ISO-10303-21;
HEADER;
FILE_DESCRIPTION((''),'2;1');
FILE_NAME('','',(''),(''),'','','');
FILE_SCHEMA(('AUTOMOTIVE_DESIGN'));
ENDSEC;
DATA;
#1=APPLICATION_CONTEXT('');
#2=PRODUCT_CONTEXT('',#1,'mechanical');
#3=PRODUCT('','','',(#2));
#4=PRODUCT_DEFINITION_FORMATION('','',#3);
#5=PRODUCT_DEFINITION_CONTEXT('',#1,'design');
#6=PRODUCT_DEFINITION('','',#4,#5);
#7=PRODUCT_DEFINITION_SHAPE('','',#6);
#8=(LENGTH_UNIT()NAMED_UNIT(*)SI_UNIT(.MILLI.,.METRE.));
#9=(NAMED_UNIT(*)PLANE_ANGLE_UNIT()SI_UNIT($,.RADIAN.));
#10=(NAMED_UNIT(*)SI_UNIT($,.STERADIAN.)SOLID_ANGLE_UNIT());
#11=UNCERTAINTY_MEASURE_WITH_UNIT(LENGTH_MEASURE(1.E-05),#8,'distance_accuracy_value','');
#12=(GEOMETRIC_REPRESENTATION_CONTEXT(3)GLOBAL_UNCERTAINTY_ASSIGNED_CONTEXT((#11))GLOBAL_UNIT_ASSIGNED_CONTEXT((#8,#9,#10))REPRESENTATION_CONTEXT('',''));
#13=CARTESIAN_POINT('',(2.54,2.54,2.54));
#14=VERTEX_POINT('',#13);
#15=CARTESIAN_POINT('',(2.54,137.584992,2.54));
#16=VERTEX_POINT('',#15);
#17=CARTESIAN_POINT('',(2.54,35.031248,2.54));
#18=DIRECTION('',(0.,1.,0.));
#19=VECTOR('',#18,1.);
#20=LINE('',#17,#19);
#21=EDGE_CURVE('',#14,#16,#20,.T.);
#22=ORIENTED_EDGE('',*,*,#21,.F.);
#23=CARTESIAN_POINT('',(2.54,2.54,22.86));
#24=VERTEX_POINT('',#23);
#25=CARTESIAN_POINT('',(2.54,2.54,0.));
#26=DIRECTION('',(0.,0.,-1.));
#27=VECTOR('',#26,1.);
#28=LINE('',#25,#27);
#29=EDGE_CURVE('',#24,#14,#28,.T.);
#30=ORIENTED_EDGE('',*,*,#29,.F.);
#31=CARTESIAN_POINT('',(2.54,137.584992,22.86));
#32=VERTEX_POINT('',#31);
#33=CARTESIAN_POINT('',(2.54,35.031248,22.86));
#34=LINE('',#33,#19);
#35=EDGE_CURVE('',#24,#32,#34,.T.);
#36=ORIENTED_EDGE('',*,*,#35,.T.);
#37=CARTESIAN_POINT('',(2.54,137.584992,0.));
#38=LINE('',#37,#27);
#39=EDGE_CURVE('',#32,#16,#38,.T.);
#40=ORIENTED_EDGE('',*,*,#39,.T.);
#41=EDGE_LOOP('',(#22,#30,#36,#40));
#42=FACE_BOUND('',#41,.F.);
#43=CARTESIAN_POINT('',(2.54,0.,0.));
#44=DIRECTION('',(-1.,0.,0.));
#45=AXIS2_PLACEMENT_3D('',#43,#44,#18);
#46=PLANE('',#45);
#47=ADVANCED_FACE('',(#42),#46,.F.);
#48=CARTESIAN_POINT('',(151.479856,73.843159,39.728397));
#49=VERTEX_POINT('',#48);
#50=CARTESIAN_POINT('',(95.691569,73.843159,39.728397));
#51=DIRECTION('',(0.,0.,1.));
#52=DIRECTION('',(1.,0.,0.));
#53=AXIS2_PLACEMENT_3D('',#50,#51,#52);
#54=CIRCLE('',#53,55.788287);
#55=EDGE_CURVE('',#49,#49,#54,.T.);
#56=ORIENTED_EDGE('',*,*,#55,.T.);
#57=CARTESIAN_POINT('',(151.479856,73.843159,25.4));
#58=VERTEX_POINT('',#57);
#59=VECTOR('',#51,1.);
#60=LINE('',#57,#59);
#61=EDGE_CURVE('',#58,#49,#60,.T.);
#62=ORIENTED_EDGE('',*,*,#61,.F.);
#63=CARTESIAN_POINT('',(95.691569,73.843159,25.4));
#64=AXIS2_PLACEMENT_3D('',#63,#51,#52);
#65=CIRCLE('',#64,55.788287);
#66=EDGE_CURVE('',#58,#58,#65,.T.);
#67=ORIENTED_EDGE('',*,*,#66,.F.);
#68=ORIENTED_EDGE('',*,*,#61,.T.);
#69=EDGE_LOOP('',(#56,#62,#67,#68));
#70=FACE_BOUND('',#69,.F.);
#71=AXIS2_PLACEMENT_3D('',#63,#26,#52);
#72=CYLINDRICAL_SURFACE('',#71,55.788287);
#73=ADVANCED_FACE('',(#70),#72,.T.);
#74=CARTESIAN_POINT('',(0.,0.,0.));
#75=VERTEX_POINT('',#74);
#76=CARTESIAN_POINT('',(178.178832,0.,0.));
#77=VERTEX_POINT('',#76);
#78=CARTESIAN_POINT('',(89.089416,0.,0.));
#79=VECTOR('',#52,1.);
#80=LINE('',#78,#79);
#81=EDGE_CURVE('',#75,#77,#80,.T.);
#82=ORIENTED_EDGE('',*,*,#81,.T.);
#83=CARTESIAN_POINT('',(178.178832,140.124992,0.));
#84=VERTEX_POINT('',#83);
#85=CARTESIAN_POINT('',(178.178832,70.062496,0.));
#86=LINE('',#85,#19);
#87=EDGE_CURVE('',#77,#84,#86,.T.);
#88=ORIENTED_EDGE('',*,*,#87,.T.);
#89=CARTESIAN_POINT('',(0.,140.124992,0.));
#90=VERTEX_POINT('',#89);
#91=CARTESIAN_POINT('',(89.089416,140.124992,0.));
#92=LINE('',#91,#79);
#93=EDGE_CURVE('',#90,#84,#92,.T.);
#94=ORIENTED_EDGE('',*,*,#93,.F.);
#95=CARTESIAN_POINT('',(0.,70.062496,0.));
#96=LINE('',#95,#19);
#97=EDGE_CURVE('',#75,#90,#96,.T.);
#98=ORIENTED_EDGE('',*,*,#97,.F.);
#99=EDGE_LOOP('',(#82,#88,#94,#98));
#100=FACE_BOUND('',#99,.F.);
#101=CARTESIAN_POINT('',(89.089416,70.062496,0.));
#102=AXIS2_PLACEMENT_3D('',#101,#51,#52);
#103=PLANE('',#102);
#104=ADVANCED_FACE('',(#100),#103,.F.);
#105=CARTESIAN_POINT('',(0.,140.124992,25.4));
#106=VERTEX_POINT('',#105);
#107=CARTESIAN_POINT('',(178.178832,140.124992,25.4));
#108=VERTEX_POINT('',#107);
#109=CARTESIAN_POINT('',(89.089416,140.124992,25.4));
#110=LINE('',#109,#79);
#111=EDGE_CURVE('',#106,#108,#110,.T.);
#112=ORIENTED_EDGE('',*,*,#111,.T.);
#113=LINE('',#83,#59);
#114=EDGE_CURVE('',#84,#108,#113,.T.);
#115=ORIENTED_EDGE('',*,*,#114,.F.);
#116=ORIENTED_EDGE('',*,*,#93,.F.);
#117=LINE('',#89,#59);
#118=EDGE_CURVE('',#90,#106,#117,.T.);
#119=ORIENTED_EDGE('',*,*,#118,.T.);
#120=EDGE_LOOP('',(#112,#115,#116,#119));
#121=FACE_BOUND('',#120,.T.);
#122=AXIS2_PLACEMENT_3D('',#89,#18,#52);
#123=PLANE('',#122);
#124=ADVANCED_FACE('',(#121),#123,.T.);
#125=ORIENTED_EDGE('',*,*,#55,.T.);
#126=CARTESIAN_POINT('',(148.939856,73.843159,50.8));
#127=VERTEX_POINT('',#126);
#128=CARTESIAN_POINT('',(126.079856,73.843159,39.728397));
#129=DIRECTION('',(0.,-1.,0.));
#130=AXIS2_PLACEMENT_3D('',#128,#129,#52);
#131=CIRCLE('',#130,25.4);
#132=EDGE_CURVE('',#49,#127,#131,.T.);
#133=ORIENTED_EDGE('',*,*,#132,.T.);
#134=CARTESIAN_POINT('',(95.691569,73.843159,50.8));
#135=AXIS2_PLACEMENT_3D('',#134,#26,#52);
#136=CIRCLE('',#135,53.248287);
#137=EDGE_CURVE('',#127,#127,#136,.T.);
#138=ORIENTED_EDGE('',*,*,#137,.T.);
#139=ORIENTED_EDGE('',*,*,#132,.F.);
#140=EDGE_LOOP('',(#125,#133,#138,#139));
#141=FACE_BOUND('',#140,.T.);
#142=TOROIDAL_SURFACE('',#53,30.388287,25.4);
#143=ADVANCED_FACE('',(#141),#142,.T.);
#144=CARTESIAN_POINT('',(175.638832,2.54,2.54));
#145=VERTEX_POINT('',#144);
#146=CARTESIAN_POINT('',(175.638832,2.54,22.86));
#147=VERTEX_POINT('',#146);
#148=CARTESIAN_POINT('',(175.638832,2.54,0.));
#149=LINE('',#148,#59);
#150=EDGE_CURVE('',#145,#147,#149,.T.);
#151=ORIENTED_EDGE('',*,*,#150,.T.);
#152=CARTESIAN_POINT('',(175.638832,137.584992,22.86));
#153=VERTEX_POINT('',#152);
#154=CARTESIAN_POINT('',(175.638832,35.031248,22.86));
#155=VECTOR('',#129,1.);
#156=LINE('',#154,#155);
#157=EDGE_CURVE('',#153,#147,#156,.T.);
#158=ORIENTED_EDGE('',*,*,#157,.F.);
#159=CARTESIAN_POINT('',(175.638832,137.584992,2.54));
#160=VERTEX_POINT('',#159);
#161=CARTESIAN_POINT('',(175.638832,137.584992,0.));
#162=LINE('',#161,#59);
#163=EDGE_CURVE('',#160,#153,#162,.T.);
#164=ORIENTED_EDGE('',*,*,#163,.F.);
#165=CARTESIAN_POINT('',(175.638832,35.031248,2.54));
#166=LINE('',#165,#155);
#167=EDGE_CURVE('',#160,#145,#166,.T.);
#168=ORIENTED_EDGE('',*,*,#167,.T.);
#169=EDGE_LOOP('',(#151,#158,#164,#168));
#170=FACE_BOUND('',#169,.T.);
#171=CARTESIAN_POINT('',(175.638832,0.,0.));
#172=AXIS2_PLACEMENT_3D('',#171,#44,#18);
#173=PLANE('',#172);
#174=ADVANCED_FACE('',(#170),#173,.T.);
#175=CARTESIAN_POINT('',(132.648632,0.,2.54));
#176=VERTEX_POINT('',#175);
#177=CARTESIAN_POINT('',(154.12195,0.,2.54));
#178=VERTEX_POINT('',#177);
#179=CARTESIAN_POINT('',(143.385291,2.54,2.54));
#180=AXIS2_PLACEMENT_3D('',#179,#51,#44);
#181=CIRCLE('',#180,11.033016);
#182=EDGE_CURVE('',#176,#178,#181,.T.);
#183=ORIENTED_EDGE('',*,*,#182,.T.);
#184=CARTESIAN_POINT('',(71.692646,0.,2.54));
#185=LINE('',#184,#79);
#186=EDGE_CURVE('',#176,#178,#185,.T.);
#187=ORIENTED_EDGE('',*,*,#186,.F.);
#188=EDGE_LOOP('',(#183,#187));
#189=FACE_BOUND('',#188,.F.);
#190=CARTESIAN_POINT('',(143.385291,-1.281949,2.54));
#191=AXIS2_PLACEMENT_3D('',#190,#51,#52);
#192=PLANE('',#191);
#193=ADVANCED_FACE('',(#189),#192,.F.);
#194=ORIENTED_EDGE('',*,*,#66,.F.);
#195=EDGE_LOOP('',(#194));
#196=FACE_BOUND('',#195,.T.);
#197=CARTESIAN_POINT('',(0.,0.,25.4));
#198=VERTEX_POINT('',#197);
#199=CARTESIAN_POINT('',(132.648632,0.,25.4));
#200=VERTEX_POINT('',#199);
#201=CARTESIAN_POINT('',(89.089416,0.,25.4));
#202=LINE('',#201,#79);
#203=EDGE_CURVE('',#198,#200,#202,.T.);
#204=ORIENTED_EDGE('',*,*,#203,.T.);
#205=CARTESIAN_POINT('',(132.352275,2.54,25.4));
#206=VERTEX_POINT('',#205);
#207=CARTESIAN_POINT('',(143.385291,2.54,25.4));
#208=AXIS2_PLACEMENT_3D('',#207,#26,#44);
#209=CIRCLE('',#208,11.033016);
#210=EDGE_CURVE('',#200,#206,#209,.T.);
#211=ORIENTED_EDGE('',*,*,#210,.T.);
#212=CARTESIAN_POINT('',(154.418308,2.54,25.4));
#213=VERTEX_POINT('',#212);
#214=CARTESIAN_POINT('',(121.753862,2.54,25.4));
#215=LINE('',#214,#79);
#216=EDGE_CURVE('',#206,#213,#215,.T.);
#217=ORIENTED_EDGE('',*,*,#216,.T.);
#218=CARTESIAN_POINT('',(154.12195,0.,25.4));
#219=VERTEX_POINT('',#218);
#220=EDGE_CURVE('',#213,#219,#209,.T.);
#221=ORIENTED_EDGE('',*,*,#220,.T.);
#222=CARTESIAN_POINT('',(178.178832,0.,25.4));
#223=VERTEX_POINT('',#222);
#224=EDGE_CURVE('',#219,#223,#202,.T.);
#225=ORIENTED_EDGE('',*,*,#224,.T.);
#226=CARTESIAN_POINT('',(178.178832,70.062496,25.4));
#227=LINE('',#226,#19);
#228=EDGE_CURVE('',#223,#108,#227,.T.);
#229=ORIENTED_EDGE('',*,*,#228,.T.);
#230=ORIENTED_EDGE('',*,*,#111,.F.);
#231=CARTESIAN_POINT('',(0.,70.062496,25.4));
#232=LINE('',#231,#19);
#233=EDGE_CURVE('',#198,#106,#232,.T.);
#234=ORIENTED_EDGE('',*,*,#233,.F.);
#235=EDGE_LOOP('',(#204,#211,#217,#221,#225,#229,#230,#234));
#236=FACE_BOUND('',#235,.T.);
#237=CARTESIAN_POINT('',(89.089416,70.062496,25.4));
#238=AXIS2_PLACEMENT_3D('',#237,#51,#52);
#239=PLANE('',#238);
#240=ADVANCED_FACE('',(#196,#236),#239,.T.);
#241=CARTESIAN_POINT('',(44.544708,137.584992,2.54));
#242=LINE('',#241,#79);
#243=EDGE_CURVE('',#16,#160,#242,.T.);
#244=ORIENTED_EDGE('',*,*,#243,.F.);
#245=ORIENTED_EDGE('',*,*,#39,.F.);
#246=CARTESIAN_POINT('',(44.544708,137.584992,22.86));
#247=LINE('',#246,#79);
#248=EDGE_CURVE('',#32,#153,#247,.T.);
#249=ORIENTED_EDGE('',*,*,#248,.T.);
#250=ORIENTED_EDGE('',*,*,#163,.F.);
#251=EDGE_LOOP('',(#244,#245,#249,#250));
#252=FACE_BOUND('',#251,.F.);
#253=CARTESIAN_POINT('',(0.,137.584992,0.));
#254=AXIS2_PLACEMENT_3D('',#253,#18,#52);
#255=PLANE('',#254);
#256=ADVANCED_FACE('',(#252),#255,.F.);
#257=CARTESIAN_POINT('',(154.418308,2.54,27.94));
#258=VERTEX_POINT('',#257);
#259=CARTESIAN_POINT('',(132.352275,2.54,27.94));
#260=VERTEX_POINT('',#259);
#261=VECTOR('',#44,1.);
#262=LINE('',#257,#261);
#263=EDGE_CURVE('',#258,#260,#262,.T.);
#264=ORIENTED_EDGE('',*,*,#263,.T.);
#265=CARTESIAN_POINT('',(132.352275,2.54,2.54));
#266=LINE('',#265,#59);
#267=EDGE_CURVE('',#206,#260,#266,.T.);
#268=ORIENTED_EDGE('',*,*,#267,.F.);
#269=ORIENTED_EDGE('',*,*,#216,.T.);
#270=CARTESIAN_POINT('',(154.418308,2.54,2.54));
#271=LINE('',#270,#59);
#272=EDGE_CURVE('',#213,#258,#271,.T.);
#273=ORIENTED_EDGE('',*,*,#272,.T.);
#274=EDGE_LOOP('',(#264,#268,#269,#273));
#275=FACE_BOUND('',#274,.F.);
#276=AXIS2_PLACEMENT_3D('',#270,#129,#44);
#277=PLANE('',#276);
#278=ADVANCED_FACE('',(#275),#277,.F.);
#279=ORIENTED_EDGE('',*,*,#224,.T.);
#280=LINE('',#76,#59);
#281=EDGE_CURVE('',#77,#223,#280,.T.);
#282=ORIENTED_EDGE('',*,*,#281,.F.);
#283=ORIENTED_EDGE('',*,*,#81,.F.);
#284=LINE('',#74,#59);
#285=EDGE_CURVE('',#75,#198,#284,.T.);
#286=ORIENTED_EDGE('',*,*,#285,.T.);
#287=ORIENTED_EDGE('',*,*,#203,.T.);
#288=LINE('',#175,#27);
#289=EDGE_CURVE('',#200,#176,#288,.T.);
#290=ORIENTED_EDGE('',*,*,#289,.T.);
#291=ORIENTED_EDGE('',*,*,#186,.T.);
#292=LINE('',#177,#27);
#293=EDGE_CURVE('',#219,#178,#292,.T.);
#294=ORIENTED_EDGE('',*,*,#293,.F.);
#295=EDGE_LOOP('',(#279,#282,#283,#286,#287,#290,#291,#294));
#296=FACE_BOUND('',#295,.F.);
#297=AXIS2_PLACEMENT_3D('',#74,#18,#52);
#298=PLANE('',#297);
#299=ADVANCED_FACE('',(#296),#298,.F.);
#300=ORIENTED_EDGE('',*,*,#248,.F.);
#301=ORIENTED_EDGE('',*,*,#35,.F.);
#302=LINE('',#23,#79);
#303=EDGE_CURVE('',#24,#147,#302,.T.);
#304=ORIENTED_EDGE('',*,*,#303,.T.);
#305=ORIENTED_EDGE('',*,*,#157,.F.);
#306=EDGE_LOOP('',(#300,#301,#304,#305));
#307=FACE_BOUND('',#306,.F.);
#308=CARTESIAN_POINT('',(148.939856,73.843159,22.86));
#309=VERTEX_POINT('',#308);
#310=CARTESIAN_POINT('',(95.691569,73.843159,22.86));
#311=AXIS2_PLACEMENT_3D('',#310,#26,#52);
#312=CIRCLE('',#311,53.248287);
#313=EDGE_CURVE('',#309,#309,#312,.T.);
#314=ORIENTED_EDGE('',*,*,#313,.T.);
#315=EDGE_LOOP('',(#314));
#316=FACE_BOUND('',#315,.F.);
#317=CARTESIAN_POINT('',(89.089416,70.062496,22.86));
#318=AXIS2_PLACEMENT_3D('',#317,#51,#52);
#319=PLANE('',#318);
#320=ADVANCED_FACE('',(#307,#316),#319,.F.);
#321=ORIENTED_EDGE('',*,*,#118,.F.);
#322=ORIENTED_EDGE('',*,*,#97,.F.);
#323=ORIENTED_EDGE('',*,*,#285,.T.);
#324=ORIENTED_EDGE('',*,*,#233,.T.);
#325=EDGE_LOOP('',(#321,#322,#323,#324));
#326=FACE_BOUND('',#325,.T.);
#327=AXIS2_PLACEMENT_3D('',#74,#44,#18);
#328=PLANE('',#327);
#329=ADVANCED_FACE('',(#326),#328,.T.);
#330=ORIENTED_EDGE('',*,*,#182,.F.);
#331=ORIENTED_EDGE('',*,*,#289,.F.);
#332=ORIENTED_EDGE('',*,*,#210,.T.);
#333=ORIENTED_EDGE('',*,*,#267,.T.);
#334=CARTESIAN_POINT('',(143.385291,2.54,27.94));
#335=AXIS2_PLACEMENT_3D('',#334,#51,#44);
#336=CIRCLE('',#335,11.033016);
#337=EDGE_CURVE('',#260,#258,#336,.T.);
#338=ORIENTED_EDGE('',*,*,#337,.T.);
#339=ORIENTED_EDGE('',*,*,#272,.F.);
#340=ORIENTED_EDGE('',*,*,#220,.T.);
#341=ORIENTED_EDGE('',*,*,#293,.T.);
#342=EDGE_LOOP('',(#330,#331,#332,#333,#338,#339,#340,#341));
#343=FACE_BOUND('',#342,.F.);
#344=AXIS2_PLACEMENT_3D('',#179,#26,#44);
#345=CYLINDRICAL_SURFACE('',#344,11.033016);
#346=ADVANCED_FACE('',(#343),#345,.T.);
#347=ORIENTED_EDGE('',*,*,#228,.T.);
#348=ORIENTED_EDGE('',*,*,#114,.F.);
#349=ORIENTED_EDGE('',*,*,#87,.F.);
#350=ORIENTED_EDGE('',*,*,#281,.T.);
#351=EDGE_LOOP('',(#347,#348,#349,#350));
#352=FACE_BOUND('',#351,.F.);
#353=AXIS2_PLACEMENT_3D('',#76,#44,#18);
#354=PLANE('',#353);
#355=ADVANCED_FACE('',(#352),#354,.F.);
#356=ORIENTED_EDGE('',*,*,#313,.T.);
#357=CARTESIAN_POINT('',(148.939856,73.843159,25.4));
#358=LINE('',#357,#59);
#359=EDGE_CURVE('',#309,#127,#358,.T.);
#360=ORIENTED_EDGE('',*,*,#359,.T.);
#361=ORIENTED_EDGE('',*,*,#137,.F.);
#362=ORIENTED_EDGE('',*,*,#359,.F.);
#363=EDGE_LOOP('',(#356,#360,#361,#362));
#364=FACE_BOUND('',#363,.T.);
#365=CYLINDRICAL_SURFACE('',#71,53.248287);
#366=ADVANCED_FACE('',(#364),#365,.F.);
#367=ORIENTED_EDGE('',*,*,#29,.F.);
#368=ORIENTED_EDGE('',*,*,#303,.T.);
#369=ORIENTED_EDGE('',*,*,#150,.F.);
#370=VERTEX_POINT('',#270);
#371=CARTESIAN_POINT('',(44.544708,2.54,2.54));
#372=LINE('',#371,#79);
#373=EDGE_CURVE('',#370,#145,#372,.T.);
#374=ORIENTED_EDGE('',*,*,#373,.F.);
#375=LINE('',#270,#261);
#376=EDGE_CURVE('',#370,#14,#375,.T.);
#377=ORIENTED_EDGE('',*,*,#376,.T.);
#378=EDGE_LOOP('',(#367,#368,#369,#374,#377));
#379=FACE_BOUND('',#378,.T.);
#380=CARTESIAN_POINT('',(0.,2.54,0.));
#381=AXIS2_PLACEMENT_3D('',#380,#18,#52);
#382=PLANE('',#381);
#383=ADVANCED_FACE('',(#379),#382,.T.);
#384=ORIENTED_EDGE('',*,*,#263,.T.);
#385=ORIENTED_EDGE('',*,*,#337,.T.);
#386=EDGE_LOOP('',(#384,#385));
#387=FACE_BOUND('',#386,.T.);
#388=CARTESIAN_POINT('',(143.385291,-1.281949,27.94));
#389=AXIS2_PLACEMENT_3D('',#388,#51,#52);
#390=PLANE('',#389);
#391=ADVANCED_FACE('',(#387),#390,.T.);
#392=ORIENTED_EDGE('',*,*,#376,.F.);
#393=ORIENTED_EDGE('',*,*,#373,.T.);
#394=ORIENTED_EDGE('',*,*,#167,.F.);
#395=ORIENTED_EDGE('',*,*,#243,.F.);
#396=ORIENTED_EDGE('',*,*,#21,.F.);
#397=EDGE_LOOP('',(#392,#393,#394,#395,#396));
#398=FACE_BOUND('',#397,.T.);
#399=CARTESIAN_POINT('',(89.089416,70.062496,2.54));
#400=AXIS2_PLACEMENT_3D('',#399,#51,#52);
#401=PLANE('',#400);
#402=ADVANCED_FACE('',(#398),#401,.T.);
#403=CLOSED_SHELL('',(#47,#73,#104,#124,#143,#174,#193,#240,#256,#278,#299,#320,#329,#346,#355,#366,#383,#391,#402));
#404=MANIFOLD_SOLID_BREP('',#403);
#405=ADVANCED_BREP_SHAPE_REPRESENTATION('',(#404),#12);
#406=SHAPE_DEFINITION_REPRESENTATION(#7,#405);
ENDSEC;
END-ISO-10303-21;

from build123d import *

# Parameters (mm, degrees)
F0_W     = 178.1788319349
F0_H     = 140.1249915361
F1_DEPTH = 25.4
F2_R     = 55.7882871659
F3_DEPTH = 25.4
F4_T     = -2.54
F7_DEPTH = 25.4


# Not quite as in the source:
# - a fillet or chamfer that OpenCascade refuses, or shapes differently, is made with other operations: its cross-section is extruded or revolved along the edge and cut away or added


with BuildPart() as f1:
    # F0 (on Top) → F1 (new body)
    with BuildSketch(Plane.XY):
        with Locations((89.0894159675, 70.0624957681)):
            Rectangle(F0_W, F0_H)
    extrude(amount=F1_DEPTH)

    # F2 (on face) → F3 (join)
    with BuildSketch(Plane.XY.offset(25.4)):
        with Locations((95.6915691495, 73.8431587815)):
            Circle(F2_R)
    extrude(amount=F3_DEPTH)

    # F4
    f4_openings = [f1.faces().sort_by_distance(p)[0] for p in [
        (95.691569, 73.843159, 50.8),
    ]]
    offset(amount=F4_T, openings=f4_openings, kind=Kind.INTERSECTION)

    # F5: fillet of radius 25.4 on 1 edges, made by hand

    # F5_s1 → F5_t2 (revolve, cut)
    with BuildSketch(Plane.XZ.offset(-73.8431587815)):
        with BuildLine():
            ThreePointArc((151.4798563154, 39.7283966834), (150.8367139512, 45.4080093463), (148.9398563154, 50.8))
            Line((148.9398563154, 50.8), (151.4798563154, 50.8))
            Line((151.4798563154, 50.8), (151.4798563154, 39.7283966834))
        make_face()
    revolve(axis=Axis((95.6915691495, 73.8431587815, 50.8), (0, 0, 1)), mode=Mode.SUBTRACT)

    # F6 (on face) → F7 (join)
    with BuildSketch(Plane.XY.offset(2.54)):
        with BuildLine():
            ThreePointArc((132.352274685, 2.54), (143.3852910995, -8.4930164146), (154.4183075141, 2.54))
            Line((154.4183075141, 2.54), (132.352274685, 2.54))
        make_face()
    extrude(amount=F7_DEPTH)


solid = f1.part
